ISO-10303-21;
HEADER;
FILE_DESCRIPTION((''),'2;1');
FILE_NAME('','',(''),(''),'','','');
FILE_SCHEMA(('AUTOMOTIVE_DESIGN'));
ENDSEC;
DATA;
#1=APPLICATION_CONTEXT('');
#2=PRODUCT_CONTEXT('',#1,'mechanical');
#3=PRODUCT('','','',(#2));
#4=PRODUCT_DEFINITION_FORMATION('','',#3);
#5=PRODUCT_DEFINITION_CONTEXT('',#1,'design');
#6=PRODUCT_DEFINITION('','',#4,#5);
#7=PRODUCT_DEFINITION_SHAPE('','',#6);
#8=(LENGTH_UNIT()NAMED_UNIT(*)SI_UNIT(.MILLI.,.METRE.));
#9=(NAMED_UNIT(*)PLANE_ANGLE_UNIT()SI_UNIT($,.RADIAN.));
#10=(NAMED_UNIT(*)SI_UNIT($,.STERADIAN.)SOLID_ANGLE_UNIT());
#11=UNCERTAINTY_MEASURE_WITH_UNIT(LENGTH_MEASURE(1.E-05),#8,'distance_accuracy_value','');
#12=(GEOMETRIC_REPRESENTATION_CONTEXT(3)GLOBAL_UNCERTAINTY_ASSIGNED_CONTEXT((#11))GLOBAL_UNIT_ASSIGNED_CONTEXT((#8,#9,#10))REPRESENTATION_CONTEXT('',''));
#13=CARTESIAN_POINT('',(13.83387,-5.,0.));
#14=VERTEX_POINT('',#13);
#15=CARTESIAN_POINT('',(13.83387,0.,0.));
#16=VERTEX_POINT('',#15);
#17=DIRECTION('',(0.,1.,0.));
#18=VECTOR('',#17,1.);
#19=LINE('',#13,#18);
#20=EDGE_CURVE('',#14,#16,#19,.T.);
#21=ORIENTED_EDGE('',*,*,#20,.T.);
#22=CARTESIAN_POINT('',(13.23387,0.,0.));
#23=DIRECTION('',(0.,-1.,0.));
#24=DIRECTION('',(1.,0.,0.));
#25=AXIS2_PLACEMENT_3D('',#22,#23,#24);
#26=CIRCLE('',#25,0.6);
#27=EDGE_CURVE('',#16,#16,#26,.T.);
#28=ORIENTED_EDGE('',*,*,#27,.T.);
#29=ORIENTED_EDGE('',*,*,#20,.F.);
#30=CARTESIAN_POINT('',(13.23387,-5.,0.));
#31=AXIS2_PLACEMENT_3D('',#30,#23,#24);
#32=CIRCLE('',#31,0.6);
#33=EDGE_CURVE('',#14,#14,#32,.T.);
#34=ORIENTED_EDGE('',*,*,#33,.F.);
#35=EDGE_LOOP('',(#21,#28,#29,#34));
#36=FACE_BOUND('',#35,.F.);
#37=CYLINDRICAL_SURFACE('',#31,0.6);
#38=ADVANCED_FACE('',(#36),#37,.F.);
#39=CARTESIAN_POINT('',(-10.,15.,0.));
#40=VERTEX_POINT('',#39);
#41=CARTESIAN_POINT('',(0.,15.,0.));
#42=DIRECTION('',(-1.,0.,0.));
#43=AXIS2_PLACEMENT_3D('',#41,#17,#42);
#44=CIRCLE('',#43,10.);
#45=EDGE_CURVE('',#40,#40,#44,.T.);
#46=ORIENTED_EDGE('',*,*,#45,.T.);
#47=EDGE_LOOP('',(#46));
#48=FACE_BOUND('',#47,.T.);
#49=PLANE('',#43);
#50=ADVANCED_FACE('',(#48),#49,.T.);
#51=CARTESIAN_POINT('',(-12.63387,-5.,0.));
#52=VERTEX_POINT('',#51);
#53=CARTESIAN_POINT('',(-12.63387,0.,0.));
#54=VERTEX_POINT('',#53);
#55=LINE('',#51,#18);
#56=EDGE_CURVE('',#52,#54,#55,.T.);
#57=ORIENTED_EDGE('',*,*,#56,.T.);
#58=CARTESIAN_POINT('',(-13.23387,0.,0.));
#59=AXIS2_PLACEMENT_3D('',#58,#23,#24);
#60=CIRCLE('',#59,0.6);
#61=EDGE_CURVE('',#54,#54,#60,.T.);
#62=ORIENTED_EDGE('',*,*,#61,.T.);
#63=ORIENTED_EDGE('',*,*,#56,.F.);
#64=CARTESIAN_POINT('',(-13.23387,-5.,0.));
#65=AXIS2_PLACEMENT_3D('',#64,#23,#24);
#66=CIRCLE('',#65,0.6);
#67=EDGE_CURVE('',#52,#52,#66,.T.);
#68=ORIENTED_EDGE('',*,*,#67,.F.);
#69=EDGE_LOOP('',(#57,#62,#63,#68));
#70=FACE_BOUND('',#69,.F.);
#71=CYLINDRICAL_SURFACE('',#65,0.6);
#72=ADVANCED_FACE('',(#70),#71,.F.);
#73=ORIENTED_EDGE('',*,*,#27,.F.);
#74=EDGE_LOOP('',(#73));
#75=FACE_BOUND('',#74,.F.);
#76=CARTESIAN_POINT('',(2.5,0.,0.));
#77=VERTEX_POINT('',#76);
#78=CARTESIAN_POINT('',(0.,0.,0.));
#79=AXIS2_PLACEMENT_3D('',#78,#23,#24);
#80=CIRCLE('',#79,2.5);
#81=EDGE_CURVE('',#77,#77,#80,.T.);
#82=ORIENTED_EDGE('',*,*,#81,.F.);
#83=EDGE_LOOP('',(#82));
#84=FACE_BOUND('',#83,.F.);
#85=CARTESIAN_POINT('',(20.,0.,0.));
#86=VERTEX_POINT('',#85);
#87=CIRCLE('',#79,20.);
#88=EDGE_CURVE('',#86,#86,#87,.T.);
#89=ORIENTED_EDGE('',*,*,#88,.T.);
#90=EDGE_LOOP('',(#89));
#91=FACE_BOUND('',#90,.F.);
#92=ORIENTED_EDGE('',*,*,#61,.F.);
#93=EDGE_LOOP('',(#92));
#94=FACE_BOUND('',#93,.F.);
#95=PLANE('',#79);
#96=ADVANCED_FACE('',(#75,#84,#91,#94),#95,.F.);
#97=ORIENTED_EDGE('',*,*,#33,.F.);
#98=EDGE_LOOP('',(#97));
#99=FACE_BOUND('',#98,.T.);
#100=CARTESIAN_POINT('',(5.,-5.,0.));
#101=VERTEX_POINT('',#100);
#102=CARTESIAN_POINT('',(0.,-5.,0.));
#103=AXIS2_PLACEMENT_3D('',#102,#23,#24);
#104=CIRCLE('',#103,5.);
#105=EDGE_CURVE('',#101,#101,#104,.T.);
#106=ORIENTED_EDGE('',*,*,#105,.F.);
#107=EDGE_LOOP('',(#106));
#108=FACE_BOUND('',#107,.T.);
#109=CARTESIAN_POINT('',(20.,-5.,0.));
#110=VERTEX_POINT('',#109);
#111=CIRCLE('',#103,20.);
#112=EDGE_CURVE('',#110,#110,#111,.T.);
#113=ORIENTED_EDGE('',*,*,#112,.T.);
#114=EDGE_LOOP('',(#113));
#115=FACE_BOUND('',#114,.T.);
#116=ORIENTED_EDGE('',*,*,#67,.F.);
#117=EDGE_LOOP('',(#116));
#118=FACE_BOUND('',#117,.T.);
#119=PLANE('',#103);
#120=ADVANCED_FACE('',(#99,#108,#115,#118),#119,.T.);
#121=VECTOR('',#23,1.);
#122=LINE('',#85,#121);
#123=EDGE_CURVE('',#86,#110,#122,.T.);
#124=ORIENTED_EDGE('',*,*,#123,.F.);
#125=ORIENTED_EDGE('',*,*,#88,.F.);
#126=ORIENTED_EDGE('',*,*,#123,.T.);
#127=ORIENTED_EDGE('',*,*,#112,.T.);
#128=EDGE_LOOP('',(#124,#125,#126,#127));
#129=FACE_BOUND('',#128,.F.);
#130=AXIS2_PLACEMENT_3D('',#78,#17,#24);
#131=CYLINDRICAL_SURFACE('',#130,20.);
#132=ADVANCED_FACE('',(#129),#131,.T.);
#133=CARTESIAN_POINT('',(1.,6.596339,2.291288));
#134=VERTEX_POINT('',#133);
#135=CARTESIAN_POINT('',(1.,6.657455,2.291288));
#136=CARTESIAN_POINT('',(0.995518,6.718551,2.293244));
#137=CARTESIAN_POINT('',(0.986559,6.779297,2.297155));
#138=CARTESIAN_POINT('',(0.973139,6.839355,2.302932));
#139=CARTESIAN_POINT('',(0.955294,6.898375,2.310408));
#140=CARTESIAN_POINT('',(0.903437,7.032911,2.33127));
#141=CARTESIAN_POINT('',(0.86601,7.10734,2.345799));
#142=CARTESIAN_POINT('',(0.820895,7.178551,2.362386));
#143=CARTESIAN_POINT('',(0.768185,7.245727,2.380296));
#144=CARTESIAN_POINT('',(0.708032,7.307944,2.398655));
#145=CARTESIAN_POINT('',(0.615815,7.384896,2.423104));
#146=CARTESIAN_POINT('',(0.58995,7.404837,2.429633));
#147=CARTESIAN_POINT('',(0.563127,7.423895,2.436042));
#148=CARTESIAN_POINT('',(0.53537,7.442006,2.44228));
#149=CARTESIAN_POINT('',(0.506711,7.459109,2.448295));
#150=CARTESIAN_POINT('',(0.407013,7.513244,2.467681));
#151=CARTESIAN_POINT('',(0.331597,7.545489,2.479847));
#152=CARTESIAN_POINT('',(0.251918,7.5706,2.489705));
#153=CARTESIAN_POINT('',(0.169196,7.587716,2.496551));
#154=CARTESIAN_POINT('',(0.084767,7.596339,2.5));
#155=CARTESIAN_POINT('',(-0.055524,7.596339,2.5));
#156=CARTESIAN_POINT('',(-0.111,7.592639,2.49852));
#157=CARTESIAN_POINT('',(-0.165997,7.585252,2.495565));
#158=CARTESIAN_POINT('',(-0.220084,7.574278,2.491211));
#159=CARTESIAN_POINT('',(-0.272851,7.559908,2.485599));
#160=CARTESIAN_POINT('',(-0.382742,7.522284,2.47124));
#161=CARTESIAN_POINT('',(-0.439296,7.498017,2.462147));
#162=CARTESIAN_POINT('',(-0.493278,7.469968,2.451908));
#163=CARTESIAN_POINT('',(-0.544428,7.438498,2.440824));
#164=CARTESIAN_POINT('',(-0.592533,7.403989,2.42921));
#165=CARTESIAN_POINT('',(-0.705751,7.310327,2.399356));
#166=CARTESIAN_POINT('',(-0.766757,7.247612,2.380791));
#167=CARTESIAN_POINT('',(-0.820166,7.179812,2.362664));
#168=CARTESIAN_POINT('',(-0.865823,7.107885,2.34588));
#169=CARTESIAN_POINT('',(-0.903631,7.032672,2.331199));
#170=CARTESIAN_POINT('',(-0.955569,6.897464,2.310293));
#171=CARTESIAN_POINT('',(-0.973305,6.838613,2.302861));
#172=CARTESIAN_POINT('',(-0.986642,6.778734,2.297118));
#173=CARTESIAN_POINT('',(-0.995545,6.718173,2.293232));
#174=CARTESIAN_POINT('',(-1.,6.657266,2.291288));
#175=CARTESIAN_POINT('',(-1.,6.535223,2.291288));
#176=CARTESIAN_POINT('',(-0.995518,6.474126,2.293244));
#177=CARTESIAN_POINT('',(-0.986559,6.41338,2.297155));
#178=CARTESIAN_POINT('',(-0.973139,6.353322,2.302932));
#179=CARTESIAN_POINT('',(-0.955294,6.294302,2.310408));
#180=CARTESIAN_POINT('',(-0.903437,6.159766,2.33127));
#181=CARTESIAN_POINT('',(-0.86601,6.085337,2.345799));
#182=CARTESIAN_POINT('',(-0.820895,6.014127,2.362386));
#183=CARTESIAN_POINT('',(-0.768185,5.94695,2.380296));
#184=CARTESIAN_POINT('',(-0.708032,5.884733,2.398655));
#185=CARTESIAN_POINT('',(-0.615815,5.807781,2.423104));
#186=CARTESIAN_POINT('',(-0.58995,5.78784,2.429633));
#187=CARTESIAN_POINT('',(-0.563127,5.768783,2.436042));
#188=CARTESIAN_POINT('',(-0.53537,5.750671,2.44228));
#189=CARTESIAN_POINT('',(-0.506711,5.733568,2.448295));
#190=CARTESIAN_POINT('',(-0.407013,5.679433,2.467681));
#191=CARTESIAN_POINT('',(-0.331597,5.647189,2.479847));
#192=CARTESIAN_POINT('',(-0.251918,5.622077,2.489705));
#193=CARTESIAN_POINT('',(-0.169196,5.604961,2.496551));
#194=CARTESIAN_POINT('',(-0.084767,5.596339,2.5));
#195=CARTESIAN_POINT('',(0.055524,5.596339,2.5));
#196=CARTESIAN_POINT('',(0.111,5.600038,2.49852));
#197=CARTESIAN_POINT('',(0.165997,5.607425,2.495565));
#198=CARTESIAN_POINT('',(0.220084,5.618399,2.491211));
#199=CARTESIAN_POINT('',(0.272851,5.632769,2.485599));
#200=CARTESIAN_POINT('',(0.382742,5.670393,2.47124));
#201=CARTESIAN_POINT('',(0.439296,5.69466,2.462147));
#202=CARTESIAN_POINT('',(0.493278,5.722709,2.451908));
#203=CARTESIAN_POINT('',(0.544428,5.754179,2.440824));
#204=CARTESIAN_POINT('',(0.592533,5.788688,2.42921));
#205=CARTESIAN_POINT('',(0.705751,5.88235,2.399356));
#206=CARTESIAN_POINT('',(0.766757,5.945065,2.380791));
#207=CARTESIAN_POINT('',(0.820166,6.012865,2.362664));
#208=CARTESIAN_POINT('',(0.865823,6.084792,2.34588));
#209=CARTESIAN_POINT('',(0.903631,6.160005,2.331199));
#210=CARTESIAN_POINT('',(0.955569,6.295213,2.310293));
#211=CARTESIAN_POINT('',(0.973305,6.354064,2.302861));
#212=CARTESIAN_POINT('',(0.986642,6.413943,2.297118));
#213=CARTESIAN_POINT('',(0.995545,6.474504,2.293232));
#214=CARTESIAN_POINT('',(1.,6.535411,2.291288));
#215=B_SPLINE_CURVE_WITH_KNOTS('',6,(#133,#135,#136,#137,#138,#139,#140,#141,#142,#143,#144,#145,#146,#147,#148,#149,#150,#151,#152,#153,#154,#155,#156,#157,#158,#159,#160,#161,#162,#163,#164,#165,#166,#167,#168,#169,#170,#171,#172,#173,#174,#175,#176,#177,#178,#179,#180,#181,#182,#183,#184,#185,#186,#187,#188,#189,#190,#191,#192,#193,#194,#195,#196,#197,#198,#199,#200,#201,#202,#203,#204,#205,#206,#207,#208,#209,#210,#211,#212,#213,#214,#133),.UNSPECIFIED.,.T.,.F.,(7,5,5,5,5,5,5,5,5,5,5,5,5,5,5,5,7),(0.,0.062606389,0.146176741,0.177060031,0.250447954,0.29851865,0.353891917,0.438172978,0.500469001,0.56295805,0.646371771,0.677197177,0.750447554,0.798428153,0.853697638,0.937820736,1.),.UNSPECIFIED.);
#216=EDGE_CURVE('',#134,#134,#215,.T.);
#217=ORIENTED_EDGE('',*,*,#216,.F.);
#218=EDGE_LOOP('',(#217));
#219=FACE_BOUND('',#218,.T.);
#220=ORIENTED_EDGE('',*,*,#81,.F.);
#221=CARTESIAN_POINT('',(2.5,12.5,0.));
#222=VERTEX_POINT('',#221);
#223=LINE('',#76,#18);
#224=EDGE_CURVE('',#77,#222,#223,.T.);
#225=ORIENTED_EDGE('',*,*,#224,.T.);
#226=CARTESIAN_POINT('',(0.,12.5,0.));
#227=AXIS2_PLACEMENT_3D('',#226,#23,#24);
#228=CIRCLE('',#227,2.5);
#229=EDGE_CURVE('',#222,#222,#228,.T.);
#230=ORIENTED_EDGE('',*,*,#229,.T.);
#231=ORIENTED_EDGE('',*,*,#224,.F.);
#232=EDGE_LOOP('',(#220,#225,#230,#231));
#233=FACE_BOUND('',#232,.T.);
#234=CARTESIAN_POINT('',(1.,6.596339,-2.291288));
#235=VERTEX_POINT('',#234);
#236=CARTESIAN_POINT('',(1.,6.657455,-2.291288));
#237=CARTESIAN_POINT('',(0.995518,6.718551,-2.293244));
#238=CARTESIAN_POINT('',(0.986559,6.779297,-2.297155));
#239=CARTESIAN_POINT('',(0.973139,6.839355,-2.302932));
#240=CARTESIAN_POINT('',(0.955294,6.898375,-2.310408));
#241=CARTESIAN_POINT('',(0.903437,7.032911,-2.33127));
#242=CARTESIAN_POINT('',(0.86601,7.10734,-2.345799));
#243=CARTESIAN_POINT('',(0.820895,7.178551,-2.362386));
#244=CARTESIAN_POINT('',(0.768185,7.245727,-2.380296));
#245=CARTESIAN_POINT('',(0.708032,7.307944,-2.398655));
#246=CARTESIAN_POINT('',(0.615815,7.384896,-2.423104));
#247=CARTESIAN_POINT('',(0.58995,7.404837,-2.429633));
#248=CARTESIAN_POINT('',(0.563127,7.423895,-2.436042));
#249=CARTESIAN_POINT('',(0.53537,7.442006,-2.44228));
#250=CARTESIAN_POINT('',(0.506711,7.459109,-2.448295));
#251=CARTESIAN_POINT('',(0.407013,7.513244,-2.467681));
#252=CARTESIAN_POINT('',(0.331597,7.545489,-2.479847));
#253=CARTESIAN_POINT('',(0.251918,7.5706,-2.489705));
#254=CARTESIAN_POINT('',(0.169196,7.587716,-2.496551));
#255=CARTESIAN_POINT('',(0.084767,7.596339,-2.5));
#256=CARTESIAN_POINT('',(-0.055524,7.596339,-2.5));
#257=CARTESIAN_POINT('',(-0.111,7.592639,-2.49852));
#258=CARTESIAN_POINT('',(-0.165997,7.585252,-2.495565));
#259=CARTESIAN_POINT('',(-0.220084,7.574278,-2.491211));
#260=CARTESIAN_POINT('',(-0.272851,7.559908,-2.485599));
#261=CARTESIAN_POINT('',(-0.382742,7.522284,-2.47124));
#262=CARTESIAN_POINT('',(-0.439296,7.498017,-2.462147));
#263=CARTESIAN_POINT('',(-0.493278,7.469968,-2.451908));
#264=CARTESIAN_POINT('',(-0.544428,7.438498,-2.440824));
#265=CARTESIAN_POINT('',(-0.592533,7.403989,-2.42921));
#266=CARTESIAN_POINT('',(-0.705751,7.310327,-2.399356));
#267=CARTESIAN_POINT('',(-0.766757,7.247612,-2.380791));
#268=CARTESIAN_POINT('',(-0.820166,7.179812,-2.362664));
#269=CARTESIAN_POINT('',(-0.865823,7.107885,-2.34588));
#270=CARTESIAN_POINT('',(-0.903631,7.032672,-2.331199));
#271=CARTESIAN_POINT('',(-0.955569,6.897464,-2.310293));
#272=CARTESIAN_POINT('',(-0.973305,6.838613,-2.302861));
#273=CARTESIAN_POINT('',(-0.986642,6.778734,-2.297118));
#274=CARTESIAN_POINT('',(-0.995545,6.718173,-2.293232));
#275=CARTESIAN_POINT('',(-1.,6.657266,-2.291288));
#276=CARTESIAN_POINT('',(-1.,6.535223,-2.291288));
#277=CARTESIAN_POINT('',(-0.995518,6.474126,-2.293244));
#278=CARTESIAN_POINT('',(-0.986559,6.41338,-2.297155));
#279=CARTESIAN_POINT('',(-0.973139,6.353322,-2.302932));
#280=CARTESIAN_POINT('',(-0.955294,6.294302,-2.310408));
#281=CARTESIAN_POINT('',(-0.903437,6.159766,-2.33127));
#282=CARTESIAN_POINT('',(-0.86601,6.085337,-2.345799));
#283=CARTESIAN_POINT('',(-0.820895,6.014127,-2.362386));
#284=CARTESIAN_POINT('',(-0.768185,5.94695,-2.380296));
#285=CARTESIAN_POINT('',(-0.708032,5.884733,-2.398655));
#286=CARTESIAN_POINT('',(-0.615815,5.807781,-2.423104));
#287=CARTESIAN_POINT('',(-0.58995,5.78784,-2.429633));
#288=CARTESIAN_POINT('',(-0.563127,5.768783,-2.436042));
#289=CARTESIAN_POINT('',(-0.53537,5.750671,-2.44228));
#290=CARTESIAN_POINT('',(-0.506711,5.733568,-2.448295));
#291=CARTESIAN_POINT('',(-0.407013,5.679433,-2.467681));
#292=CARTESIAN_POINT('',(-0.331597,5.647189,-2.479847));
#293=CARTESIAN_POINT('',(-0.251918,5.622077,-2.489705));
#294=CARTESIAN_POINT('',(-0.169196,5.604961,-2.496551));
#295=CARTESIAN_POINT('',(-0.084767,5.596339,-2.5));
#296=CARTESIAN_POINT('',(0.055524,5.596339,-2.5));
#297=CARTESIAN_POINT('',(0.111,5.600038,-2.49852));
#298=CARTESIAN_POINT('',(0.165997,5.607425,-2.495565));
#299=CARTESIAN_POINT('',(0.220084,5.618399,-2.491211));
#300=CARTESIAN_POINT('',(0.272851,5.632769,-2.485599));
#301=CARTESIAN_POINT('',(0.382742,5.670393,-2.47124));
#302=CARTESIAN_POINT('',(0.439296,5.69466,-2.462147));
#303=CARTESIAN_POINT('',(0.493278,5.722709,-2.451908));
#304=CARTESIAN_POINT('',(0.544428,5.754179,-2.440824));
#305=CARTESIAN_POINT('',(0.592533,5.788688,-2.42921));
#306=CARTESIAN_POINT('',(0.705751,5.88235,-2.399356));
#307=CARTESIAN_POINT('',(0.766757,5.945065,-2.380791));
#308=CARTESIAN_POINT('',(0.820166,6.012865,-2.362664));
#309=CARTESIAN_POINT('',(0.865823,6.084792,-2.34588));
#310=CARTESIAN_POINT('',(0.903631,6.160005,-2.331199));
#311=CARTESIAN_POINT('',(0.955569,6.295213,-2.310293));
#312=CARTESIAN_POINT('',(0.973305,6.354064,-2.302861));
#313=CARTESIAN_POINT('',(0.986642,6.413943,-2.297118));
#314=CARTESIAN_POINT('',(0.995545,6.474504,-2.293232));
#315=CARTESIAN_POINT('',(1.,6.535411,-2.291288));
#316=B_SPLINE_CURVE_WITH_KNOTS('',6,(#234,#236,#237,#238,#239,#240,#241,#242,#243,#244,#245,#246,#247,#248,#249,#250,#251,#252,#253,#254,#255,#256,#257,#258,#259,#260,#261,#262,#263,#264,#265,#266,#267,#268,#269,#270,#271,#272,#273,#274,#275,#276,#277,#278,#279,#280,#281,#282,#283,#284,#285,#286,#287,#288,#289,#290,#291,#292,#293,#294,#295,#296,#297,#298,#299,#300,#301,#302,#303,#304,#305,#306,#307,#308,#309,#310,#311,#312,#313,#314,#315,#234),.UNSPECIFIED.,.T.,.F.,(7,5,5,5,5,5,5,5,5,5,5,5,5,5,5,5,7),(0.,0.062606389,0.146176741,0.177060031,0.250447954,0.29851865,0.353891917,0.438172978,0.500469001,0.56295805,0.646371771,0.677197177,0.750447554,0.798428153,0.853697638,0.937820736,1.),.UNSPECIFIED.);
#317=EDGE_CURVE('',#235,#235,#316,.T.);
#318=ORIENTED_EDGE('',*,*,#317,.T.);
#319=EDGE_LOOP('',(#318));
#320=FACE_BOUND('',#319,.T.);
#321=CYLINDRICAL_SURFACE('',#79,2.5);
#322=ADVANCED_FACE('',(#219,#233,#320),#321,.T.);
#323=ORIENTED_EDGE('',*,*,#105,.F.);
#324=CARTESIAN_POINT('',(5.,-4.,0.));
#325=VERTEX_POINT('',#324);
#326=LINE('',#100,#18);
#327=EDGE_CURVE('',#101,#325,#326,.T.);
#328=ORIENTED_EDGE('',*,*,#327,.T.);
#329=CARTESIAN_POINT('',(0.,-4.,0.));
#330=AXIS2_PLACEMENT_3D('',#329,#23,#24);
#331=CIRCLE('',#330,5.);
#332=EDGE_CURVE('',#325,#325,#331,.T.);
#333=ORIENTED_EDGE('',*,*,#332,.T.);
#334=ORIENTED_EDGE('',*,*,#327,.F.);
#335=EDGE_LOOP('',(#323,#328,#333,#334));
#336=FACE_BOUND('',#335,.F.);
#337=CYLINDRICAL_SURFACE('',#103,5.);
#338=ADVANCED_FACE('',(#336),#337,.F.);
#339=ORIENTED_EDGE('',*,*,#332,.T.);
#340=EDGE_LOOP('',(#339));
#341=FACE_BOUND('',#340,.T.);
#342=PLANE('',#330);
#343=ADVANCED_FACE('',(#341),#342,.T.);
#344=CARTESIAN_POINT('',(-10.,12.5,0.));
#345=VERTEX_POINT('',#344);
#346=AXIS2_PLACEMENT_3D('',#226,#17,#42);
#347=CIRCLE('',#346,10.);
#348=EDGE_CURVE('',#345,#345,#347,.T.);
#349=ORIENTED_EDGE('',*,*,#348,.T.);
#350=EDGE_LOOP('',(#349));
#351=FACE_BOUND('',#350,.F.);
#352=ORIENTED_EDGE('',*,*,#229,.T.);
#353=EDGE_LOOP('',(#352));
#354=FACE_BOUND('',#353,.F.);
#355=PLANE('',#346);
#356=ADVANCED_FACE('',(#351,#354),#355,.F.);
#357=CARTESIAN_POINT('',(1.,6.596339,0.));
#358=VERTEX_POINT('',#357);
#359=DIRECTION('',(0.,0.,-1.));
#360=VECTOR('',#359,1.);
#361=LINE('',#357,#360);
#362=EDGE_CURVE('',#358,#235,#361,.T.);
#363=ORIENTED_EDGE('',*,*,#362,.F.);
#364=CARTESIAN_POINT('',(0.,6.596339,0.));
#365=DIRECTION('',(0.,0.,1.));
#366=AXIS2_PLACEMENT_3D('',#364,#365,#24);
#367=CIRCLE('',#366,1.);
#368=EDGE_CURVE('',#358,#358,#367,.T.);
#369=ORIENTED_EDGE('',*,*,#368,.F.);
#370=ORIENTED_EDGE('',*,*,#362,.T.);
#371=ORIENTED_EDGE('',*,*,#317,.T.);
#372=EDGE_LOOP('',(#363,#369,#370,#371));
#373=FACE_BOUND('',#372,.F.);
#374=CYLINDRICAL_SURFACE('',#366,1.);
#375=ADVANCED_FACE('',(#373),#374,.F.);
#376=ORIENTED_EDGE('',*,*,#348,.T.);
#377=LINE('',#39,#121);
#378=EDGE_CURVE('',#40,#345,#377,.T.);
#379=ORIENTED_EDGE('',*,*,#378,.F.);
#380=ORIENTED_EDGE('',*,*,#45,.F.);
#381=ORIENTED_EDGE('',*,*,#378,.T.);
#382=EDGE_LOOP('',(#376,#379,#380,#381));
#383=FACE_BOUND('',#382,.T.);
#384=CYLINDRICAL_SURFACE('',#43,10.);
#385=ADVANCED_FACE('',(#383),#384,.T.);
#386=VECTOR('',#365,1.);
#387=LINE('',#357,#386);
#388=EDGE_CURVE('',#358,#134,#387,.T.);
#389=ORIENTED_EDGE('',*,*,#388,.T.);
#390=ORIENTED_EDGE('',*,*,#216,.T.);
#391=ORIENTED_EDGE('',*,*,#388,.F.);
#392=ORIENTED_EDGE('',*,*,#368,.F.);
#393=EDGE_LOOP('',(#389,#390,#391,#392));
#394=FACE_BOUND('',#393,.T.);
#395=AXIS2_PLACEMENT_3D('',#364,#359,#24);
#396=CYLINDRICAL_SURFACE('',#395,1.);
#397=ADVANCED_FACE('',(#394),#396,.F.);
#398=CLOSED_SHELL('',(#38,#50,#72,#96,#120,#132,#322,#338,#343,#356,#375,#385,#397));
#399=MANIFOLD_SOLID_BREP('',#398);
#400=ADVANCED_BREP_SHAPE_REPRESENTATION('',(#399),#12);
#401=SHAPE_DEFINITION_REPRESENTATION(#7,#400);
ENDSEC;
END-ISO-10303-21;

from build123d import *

# Parameters (mm, degrees)
F0_R          = 20
F1_DEPTH      = 5
F2_R          = 0.6
F3_DEPTH      = 5
F4_R          = 2.5
F5_DEPTH      = 15
F6_R          = 1
F7_DEPTH      = 25
F7_DEPTH_BACK = 25
F9_DEPTH      = 25
F9_DEPTH_BACK = 25
F8_R          = 5
F10_DEPTH     = 1
F11_R         = 10
F12_DEPTH     = 2.5


# Not quite as in the source:
# - a feature names something its author has since deleted; it is built from what else it names


with BuildPart() as f1:
    # F0 (on Front) → F1 (new body)
    with BuildSketch(Plane.XZ):
        Circle(F0_R)
    extrude(amount=F1_DEPTH)

    # F2 (on face) → F3 (cut, through all)
    with BuildSketch(Plane.XZ.offset(5)):
        with Locations((-13.23387, 0)):
            Circle(F2_R)
        with Locations((13.23387, 0)):
            Circle(F2_R)
    extrude(amount=-F3_DEPTH, mode=Mode.SUBTRACT)

    # F4 (on face) → F5 (join)
    with BuildSketch(Plane.XZ):
        Circle(F4_R)
    extrude(amount=-F5_DEPTH)

    # F6 (on Top) → F7 (cut, two sides)
    with BuildSketch(Plane.XY) as f7_sk:
        with Locations((0, 6.5963385438)):
            Circle(F6_R)
    extrude(amount=F7_DEPTH, mode=Mode.SUBTRACT)
    extrude(f7_sk.sketch, amount=-F7_DEPTH_BACK, mode=Mode.SUBTRACT)

    # F6 (on Top) → F9 (cut, two sides)
    with BuildSketch(Plane.XY) as f9_sk:
        with Locations((0, 6.5963385438)):
            Circle(F6_R)
    extrude(amount=-F9_DEPTH, mode=Mode.SUBTRACT)
    extrude(f9_sk.sketch, amount=F9_DEPTH_BACK, mode=Mode.SUBTRACT)

    # F8 (on face) → F10 (cut)
    with BuildSketch(Plane.XZ.offset(5)):
        Circle(F8_R)
    extrude(amount=-F10_DEPTH, mode=Mode.SUBTRACT)

    # F11 (on face) → F12 (join)
    with BuildSketch(Plane(origin=(0, 15, 0), x_dir=(-1, 0, 0), z_dir=(0, 1, 0))):
        Circle(F11_R)
    extrude(amount=-F12_DEPTH)


solid = f1.part
